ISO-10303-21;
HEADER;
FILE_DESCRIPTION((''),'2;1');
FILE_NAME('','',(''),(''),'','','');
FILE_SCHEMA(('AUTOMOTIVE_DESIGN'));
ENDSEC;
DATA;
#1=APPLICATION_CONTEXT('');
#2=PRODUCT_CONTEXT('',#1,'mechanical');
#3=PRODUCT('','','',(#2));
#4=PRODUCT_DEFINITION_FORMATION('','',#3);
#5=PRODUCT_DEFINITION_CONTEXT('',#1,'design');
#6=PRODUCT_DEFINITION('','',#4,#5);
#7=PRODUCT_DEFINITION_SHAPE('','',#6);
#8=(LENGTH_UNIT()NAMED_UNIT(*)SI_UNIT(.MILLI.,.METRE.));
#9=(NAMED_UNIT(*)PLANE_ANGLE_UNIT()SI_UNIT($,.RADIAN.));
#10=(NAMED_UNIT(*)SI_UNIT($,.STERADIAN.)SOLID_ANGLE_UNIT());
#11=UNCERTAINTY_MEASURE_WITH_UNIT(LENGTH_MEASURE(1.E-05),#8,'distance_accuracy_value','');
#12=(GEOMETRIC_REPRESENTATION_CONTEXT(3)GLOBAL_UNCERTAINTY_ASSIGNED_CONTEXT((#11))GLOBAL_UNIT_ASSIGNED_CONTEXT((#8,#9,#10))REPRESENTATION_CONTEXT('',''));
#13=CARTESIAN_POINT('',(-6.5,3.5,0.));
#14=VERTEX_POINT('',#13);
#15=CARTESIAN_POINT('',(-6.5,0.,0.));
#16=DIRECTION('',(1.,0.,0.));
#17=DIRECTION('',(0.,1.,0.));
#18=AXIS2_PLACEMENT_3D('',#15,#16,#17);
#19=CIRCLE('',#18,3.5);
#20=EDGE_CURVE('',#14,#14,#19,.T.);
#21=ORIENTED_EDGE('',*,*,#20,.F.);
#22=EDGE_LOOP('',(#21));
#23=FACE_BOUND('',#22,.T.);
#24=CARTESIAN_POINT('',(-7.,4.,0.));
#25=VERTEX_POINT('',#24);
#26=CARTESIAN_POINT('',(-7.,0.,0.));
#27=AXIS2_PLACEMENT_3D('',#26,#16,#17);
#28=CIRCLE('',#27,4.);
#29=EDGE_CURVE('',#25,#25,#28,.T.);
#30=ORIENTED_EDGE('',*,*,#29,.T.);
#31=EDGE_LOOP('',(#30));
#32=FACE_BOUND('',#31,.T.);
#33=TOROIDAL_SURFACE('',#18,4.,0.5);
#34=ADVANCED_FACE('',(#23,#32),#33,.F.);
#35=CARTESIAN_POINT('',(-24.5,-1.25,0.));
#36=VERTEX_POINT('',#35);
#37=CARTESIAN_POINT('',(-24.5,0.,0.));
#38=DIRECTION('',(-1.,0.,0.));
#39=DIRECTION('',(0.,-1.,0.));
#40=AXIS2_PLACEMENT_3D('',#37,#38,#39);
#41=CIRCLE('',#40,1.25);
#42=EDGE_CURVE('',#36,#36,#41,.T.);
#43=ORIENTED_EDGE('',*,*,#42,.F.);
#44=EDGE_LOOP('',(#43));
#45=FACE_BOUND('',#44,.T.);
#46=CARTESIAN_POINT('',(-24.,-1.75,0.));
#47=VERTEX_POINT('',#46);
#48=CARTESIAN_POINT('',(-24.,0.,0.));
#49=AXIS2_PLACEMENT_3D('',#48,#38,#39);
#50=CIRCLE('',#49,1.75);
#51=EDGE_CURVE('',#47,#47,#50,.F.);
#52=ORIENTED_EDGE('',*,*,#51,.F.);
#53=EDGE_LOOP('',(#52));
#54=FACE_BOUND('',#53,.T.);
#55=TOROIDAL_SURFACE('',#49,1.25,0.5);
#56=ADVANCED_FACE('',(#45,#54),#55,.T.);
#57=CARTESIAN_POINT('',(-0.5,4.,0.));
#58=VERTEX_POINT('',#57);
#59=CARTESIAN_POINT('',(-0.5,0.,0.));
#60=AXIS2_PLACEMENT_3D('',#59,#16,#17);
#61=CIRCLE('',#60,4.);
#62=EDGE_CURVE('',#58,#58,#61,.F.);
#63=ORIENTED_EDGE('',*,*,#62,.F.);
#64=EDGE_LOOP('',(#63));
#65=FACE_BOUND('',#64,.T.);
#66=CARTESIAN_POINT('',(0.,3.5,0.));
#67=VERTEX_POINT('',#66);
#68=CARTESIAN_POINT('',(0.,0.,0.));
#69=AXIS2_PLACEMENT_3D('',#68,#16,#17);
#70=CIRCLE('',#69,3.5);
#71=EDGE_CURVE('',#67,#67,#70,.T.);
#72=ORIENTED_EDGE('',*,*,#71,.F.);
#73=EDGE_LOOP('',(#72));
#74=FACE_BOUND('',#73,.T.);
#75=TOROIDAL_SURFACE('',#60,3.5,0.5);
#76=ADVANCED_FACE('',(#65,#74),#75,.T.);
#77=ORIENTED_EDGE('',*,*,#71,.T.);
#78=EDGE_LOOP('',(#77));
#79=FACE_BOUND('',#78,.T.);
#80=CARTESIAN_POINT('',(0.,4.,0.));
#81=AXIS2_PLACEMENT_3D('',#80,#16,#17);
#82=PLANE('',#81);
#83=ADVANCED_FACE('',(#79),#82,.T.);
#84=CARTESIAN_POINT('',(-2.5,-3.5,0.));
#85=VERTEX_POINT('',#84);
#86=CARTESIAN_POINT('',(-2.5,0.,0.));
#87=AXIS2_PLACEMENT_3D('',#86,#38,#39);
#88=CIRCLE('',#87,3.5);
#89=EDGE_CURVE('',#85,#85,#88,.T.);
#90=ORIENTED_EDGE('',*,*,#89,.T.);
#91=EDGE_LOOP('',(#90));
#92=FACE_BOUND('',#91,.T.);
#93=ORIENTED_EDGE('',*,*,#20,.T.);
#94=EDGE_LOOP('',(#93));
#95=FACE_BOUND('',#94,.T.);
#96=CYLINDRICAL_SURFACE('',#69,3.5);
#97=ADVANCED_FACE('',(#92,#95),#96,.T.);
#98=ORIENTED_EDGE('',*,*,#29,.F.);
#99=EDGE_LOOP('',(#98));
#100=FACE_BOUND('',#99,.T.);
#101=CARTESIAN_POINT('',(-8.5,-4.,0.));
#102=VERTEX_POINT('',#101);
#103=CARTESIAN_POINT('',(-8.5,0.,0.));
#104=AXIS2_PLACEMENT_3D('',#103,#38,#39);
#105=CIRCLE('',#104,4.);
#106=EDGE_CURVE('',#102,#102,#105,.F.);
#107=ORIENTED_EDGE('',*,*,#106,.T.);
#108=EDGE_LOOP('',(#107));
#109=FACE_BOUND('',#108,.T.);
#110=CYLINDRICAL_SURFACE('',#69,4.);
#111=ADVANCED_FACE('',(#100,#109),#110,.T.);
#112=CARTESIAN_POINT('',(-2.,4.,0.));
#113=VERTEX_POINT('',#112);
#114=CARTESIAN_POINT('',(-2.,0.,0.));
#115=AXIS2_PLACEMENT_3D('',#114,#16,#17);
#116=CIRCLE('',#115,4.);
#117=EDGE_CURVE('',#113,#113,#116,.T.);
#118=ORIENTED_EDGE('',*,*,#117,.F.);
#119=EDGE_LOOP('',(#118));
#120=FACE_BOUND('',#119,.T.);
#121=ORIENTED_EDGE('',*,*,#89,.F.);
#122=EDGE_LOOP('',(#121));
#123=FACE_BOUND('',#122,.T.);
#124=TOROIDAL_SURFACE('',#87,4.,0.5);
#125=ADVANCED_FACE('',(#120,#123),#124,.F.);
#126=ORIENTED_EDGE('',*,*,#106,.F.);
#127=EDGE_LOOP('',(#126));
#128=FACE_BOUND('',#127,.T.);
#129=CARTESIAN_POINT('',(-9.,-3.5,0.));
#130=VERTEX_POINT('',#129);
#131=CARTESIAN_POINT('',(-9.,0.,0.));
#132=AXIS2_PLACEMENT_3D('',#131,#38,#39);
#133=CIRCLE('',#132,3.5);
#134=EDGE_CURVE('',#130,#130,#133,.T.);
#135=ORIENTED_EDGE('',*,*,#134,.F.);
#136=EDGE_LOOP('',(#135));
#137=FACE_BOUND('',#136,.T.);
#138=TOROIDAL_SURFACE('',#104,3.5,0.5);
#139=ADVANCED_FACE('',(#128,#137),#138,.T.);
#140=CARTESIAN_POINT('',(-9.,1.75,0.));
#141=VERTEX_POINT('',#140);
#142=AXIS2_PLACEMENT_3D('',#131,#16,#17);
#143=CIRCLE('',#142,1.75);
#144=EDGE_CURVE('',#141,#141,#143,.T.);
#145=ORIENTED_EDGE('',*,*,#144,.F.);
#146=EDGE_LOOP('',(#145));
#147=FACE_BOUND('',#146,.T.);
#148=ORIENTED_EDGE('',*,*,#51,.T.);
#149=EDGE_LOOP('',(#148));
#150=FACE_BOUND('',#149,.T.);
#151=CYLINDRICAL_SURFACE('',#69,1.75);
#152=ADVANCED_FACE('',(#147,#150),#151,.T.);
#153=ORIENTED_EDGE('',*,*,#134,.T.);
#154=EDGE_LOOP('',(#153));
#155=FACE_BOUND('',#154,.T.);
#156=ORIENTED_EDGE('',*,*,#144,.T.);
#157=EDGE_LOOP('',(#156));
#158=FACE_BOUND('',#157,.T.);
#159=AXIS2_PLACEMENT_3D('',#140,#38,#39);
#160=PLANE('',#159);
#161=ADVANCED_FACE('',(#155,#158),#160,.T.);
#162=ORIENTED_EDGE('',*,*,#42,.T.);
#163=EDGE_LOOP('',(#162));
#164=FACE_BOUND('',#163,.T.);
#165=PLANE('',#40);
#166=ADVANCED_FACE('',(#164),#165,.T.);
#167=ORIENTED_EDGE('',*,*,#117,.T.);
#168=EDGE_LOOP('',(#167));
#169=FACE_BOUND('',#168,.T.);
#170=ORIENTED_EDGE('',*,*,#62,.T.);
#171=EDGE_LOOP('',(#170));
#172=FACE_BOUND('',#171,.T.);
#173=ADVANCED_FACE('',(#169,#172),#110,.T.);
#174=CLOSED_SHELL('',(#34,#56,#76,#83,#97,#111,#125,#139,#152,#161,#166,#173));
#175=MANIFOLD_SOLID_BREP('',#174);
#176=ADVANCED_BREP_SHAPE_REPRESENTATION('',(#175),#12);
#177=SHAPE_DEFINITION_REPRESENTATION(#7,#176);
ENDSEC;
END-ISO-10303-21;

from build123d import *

# Parameters (mm, degrees)
VERRUNDUNG1_R = 0.5


with BuildPart() as part:
    # Skizze1 → Rotation1 (revolve)
    with BuildSketch(Plane.XY):
        Polygon((0, 0), (-24.5, 0), (-24.5, 1.75), (-9, 1.75), (-9, 4), (-7, 4), (-7, 3.5), (-2, 3.5), (-2, 4), (0, 4), align=None)
    revolve(axis=Axis((0, 0, 0), (-1, 0, 0)))

    # Verrundung1
    verrundung1_edges = [part.edges().sort_by_distance(p)[0] for p in [
        (-24.5, -1.75, 0),
        (0, -4, 0),
        (-2, -3.5, 0),
        (-7, -3.5, 0),
        (-9, -4, 0),
    ]]
    fillet(verrundung1_edges, radius=VERRUNDUNG1_R - 0.0001)  # a hair under: the kernel refuses the full size


solid = part.part
